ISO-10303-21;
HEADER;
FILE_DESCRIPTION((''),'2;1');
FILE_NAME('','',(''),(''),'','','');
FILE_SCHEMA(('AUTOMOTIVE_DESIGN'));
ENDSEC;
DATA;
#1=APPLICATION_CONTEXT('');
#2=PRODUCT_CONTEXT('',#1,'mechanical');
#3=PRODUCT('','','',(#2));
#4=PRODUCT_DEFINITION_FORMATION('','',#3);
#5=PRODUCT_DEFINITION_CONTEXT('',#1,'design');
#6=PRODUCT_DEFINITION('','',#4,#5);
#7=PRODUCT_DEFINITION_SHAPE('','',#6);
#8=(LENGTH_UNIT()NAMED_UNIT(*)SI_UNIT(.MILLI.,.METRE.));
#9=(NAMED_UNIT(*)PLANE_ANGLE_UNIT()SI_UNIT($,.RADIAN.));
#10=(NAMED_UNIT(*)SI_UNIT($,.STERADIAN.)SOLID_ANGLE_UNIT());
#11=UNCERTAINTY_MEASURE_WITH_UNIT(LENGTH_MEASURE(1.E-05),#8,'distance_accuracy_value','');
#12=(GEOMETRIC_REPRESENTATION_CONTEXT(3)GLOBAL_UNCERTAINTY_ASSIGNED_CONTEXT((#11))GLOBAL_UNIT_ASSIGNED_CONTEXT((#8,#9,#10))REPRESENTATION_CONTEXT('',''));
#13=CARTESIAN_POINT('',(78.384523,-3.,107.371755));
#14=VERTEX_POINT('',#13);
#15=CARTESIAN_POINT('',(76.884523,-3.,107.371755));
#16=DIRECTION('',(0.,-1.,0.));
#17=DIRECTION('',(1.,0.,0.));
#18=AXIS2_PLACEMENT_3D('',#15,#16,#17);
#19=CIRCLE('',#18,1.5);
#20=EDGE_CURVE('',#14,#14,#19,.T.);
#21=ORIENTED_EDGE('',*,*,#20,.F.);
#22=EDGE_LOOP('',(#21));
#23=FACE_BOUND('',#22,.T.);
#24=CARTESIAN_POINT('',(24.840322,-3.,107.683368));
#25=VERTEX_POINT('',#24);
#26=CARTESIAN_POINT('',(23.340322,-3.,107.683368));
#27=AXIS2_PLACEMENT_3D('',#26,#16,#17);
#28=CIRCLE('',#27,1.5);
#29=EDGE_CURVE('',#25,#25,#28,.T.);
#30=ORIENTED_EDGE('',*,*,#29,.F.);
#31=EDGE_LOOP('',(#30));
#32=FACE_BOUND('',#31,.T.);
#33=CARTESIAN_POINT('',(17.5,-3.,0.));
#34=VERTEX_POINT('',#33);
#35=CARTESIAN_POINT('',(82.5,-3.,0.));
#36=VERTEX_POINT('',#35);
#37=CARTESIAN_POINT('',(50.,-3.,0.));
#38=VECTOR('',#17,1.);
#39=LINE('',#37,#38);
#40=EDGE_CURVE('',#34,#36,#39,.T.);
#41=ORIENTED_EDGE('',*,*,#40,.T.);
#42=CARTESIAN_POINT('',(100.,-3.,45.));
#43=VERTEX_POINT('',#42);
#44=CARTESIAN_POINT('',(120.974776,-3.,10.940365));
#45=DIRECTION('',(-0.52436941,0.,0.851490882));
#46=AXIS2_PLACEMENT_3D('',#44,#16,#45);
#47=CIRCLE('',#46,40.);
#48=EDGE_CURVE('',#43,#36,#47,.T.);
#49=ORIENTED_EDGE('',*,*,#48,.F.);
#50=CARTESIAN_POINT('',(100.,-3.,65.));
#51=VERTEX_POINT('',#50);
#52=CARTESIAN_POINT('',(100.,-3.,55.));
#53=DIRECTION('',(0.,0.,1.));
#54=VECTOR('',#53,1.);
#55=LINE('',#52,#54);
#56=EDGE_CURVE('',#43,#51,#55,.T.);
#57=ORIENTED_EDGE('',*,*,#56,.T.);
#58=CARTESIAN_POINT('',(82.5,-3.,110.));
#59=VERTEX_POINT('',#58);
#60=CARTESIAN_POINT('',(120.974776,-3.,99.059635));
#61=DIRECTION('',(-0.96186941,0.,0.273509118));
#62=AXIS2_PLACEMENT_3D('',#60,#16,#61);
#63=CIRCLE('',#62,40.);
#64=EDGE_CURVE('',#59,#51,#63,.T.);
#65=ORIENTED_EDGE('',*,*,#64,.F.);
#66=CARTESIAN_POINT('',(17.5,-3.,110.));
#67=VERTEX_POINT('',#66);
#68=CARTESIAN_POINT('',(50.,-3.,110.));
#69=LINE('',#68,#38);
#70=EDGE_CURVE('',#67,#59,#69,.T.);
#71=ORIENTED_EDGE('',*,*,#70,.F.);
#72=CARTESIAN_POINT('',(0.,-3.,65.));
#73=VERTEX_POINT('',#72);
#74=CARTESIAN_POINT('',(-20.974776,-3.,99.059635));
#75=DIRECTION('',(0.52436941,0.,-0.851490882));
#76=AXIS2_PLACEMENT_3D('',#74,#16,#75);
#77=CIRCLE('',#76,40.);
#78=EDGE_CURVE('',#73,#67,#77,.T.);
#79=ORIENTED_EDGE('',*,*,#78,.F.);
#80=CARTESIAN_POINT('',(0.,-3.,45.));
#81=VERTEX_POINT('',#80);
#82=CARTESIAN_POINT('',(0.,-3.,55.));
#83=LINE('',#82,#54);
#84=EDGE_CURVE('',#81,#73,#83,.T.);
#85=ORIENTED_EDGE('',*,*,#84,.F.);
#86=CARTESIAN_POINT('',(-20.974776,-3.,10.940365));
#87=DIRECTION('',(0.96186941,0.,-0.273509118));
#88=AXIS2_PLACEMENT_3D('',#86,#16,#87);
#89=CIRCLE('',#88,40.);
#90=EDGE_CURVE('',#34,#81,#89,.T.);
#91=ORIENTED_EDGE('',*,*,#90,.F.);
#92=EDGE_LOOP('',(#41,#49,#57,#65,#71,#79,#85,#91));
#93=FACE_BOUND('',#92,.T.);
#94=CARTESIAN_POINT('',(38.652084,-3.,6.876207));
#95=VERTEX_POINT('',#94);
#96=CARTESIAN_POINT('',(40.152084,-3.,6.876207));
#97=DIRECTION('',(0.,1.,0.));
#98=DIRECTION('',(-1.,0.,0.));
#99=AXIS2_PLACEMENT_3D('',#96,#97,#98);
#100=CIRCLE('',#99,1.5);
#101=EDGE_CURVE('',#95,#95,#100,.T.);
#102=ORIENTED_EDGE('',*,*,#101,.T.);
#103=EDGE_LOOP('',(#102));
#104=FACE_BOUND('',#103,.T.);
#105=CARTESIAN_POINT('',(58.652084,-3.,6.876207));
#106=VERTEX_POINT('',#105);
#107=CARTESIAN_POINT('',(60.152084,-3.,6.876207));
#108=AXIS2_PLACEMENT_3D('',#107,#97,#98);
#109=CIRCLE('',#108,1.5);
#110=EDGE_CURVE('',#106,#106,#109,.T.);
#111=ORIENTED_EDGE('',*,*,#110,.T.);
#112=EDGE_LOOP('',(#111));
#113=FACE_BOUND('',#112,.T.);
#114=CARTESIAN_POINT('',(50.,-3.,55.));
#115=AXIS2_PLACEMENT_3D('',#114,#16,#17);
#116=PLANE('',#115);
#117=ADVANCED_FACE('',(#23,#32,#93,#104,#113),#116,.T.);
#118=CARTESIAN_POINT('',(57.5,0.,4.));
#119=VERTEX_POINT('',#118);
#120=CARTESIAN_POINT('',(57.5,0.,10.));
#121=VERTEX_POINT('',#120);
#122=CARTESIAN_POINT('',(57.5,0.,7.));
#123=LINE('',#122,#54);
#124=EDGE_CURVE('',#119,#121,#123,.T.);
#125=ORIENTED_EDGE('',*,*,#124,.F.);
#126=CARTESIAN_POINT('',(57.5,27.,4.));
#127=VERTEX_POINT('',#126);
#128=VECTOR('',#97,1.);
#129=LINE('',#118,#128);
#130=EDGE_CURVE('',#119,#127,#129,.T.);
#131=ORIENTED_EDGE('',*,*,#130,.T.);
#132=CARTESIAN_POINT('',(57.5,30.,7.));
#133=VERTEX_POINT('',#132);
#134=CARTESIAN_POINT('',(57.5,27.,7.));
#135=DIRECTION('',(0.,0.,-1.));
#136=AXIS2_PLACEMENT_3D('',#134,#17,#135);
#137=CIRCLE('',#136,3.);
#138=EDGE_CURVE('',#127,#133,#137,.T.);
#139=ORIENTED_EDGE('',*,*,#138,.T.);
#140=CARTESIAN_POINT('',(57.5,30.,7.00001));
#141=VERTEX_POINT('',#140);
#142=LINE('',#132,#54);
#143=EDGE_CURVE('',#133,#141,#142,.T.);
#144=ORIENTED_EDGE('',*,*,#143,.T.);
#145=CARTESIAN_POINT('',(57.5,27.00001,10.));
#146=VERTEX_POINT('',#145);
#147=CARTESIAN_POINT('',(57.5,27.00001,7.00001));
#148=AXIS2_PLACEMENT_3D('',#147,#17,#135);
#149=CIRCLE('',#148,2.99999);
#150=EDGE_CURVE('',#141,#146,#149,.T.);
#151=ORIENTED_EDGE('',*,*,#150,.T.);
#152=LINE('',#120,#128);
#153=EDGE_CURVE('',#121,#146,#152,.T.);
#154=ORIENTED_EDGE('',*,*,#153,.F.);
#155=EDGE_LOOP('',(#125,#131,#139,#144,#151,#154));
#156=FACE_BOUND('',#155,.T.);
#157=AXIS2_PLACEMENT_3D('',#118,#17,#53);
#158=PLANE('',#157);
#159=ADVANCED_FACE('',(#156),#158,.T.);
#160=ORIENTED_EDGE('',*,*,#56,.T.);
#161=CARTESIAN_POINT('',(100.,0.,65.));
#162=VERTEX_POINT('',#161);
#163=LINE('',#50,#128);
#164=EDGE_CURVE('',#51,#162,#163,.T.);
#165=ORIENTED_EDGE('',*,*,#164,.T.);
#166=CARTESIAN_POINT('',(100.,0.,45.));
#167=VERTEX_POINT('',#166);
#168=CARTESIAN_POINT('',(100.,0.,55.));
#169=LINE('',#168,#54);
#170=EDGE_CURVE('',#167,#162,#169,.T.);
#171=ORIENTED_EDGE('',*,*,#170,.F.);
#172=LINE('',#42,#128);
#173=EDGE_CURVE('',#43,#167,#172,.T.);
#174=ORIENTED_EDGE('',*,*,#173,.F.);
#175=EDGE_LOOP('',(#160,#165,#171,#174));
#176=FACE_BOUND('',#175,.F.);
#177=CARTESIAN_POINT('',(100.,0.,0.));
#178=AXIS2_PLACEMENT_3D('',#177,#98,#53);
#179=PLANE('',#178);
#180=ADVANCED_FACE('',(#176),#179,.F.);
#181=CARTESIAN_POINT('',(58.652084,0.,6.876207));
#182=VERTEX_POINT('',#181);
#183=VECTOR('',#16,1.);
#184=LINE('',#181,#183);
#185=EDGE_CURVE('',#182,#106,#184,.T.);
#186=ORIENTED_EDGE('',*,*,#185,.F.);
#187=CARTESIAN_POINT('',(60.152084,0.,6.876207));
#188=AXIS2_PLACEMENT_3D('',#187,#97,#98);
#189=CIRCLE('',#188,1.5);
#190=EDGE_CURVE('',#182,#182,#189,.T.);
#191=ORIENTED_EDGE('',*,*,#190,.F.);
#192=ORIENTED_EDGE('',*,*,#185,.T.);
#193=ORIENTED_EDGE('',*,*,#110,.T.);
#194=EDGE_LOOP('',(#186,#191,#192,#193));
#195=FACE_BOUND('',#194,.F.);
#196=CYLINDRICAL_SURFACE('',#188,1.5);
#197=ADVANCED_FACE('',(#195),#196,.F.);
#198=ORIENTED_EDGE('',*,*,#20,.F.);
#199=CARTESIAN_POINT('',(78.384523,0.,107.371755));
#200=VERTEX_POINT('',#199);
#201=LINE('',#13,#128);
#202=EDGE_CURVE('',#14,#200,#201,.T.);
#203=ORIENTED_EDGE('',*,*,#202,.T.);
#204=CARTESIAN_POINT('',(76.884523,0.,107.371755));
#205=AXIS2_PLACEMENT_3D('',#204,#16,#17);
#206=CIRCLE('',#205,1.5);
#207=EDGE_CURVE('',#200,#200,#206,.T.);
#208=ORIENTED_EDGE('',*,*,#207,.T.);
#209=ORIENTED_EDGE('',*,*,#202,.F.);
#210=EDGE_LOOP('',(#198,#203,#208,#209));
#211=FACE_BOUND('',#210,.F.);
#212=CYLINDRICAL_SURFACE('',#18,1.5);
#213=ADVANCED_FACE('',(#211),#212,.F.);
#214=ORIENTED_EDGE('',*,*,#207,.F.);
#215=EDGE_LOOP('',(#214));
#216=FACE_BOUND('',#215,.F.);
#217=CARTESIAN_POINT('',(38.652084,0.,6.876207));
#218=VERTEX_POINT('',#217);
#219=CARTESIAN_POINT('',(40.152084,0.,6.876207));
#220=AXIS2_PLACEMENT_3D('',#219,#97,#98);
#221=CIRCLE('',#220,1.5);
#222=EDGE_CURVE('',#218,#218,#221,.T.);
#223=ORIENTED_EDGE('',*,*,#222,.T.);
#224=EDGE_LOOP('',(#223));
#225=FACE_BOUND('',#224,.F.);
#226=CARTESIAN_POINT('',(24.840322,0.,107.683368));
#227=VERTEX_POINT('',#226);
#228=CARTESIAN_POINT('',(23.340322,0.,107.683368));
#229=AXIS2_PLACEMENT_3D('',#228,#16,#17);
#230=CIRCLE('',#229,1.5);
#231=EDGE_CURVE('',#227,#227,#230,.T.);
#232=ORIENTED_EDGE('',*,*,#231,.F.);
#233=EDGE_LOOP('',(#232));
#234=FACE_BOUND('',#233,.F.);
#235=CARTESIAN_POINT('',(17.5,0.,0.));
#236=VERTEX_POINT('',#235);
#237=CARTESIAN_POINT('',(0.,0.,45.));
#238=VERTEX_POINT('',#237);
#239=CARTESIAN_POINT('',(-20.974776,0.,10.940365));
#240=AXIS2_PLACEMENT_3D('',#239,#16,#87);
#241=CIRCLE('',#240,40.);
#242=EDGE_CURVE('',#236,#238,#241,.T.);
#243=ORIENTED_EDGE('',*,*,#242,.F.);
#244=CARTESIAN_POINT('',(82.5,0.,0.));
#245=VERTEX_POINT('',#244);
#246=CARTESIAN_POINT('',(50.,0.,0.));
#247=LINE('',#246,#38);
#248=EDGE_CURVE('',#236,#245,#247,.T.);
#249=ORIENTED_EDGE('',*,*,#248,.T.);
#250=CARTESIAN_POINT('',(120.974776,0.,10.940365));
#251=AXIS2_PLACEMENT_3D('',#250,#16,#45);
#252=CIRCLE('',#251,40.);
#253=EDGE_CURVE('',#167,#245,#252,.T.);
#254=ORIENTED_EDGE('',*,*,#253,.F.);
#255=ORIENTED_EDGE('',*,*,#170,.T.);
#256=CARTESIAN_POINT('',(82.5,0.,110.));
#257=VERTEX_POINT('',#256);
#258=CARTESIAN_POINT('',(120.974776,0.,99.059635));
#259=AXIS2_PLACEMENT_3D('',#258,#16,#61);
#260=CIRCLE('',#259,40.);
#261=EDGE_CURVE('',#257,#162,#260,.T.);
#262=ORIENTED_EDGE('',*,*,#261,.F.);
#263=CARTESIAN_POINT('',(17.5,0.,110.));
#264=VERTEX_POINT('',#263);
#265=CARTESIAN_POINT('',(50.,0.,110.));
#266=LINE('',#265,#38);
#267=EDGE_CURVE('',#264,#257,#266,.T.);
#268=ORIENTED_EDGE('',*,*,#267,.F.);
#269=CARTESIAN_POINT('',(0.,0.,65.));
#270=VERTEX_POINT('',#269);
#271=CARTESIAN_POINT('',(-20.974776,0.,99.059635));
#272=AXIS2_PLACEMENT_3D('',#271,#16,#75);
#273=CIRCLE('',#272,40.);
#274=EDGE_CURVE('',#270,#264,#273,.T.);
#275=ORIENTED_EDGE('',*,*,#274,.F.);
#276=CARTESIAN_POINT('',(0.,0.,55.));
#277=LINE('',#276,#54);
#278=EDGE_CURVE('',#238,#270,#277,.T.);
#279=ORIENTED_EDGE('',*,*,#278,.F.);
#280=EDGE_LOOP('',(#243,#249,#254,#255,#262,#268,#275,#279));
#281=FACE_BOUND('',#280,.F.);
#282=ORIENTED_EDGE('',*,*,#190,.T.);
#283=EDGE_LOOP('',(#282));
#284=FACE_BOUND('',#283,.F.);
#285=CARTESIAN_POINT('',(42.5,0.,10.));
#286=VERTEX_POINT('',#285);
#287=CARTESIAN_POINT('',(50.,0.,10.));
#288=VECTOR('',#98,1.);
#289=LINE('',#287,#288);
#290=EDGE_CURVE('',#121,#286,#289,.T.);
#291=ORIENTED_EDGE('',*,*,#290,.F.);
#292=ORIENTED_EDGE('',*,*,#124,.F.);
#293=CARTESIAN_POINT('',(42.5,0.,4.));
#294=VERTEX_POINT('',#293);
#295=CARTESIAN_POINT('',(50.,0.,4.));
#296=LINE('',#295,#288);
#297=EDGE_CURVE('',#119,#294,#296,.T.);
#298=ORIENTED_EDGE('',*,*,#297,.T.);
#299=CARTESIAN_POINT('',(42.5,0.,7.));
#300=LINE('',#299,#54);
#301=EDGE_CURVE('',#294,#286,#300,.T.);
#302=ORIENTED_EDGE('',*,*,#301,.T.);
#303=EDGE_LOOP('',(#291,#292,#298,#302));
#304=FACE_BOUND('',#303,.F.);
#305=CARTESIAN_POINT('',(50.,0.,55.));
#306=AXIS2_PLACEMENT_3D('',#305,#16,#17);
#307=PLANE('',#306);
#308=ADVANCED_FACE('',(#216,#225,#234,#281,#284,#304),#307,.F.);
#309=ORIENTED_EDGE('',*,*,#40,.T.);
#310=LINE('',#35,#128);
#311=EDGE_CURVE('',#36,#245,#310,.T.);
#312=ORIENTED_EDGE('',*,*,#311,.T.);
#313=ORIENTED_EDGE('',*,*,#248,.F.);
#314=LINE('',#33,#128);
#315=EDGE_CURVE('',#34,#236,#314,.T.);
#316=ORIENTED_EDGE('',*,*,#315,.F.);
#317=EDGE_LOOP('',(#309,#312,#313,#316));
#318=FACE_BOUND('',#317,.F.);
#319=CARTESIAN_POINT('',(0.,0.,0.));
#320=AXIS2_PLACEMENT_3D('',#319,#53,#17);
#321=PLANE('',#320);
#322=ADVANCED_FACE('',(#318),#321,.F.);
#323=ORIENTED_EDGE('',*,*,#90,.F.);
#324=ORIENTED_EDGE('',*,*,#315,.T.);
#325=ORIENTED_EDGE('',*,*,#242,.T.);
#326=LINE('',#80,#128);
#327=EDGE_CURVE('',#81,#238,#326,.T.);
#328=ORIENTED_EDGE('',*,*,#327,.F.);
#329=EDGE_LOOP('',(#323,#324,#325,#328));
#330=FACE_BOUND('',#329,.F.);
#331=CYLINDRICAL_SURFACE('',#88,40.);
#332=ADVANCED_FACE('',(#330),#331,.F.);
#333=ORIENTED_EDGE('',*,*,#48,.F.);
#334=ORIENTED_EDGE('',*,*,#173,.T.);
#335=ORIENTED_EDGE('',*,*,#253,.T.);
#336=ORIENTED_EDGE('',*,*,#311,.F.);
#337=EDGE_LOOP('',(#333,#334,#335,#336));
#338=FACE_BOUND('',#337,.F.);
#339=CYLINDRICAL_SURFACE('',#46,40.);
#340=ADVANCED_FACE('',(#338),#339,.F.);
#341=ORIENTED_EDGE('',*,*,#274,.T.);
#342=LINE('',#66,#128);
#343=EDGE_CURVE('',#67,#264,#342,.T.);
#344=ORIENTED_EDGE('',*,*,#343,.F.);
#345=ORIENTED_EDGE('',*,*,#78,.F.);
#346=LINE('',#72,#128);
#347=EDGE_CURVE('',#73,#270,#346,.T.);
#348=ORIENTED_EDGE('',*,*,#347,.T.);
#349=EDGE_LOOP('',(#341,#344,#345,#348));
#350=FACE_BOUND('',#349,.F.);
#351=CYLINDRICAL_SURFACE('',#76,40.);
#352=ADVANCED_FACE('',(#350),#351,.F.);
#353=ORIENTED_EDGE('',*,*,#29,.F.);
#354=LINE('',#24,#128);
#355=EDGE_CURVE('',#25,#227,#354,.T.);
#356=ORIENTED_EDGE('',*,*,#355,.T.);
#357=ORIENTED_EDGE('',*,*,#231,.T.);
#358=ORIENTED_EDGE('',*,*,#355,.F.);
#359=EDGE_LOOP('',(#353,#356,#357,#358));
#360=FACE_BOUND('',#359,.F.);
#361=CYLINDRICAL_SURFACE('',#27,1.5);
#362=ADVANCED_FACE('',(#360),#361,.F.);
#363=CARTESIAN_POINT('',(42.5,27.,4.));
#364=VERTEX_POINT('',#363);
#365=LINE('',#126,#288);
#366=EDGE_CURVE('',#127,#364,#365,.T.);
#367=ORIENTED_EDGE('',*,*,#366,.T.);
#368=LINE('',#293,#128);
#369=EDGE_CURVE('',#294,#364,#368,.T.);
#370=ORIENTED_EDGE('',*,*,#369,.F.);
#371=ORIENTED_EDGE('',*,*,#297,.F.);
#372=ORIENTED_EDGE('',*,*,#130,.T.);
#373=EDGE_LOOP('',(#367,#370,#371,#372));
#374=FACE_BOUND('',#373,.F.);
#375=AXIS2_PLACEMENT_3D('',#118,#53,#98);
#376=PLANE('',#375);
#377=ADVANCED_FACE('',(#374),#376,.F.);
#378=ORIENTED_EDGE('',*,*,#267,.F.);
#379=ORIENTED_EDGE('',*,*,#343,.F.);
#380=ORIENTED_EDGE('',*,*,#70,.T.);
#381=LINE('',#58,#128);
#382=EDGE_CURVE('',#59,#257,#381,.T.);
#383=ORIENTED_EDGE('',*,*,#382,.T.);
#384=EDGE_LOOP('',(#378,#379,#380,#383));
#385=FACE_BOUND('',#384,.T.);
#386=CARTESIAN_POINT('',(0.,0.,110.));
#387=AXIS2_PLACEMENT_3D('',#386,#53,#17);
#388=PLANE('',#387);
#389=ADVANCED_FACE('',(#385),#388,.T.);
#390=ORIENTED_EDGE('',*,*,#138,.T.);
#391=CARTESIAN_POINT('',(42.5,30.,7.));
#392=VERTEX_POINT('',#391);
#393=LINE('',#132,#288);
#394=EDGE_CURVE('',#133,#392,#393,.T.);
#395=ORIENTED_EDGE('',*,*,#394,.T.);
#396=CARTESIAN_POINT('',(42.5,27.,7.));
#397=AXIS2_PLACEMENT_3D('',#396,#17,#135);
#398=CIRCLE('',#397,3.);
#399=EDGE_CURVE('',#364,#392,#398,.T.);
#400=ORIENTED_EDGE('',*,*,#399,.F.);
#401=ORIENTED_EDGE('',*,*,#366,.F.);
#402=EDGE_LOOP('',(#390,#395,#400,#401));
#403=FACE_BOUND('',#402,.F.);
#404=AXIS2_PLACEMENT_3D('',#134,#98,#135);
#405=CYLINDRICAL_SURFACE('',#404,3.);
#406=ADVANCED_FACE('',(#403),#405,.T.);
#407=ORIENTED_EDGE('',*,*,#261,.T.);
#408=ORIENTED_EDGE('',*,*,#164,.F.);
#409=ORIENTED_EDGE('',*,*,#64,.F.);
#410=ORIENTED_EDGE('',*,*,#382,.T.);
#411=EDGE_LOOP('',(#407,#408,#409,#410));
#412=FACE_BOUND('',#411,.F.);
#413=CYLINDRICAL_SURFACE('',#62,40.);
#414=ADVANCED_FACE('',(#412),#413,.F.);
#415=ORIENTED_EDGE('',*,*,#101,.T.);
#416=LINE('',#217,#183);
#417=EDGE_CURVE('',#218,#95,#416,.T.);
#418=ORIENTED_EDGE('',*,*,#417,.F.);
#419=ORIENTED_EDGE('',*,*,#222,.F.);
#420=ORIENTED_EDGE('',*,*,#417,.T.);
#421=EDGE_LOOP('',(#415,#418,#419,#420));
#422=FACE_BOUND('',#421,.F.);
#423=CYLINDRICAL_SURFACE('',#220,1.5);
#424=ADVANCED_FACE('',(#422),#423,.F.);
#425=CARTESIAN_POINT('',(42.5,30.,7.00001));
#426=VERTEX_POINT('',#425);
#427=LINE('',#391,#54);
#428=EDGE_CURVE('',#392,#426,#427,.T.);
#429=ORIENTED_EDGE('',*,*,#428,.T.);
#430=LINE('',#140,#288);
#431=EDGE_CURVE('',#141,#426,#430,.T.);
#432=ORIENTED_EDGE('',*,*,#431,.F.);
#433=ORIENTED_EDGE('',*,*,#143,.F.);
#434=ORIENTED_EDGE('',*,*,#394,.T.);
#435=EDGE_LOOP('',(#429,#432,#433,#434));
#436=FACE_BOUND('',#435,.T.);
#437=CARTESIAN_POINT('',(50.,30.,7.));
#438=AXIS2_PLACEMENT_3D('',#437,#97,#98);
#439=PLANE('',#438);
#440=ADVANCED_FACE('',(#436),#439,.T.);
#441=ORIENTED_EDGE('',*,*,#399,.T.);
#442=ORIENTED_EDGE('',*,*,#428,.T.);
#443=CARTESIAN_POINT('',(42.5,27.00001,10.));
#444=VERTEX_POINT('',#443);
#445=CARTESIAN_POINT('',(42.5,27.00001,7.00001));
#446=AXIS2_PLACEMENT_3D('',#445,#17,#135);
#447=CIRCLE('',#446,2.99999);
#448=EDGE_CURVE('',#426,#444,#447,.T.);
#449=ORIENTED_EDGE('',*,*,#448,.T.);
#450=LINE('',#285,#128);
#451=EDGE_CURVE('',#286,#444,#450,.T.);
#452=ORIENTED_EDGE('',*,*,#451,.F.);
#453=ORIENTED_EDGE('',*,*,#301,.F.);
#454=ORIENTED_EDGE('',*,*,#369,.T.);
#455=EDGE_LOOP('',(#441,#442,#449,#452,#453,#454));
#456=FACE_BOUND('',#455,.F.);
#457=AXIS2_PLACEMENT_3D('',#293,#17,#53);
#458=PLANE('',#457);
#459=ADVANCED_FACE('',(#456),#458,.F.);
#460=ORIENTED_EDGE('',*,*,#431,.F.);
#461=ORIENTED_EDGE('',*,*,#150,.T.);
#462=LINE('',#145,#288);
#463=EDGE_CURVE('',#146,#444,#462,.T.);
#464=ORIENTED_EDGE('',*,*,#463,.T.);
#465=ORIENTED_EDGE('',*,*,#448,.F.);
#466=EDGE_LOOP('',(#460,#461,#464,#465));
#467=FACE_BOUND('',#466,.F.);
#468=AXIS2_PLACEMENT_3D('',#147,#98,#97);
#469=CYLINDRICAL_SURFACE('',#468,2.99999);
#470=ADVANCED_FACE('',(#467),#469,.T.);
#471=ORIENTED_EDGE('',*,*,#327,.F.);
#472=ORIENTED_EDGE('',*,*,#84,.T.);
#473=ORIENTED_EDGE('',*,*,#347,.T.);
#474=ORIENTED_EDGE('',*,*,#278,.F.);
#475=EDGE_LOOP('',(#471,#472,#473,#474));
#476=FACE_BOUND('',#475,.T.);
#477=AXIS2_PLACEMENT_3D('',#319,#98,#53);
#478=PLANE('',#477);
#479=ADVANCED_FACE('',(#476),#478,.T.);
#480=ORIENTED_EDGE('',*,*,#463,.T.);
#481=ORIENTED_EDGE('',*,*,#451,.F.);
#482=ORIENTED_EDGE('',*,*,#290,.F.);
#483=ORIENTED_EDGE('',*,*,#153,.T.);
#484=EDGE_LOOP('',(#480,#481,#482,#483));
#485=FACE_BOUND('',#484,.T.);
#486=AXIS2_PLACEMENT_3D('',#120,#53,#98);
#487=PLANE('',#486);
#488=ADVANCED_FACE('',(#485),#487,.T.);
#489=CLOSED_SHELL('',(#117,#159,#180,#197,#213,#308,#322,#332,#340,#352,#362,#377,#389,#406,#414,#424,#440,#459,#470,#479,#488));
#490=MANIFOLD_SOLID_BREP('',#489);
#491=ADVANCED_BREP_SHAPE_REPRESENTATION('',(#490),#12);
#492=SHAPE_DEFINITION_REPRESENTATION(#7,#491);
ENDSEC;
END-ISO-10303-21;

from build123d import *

# Parameters (mm, degrees)
F0_W      = 100
F0_H      = 110
F1_DEPTH  = 3
F3_DEPTH  = 25
F4_W      = 15
F4_H      = 6
F5_DEPTH  = 30
F6_R      = 3
F7_R      = 2.99999
F8_R      = 1.5
F9_DEPTH  = 25
F10_R     = 1.5
F11_DEPTH = 25


# Not quite as in the source:
# - a fillet or chamfer is up to 0.001 mm smaller than in the source, because OpenCascade refuses the exact size


with BuildPart() as f1:
    # F0 (on Front) → F1 (new body)
    with BuildSketch(Plane.XZ):
        with Locations((50, 55)):
            Rectangle(F0_W, F0_H)
    extrude(amount=F1_DEPTH)

    # F2 (on face) → F3 (cut)
    with BuildSketch(Plane.XZ.offset(3)):
        with BuildLine():
            Line((0, 110), (0, 65))
            ThreePointArc((0, 65), (16.3054104548, 84.5617848231), (17.5, 110))
            Line((17.5, 110), (0, 110))
        make_face()
        with BuildLine():
            Line((100, 110), (82.5, 110))
            ThreePointArc((82.5, 110), (83.6945895452, 84.5617848231), (100, 65))
            Line((100, 65), (100, 110))
        make_face()
        with BuildLine():
            ThreePointArc((100, 45), (83.6945895452, 25.4382151769), (82.5, 0))
            Line((82.5, 0), (100, 0))
            Line((100, 0), (100, 45))
        make_face()
        with BuildLine():
            Line((0, 45), (0, 0))
            Line((0, 0), (17.5, 0))
            ThreePointArc((17.5, 0), (16.3054104548, 25.4382151769), (0, 45))
        make_face()
    extrude(amount=-F3_DEPTH, mode=Mode.SUBTRACT)

    # F4 (on face) → F5 (join)
    with BuildSketch(Plane(origin=(0, 0, 0), x_dir=(-1, 0, 0), z_dir=(0, 1, 0))):
        with Locations((-50, 7)):
            Rectangle(F4_W, F4_H)
    extrude(amount=F5_DEPTH)

    # F6
    f6_edges = [f1.edges().sort_by_distance(p)[0] for p in [
        (50, 30, 4),
    ]]
    fillet(f6_edges, radius=F6_R)

    # F7 (radius 3 in the source; OpenCascade refuses exactly that, so slightly less here)
    f7_edges = [f1.edges().sort_by_distance(p)[0] for p in [
        (50, 30, 10),
    ]]
    fillet(f7_edges, radius=F7_R)

    # F8 (on face) → F9 (cut)
    with BuildSketch(Plane(origin=(0, 0, 0), x_dir=(-1, 0, 0), z_dir=(0, 1, 0))):
        with Locations((-40.1520836353, 6.8762069568)):
            Circle(F8_R)
        with Locations((-60.1520836353, 6.8762069568)):
            Circle(F8_R)
    extrude(amount=-F9_DEPTH, mode=Mode.SUBTRACT)

    # F10 (on face) → F11 (cut)
    with BuildSketch(Plane.XZ.offset(3)):
        with Locations((23.3403220773, 107.6833680272)):
            Circle(F10_R)
        with Locations((76.8845230341, 107.3717549443)):
            Circle(F10_R)
    extrude(amount=-F11_DEPTH, mode=Mode.SUBTRACT)


solid = f1.part
